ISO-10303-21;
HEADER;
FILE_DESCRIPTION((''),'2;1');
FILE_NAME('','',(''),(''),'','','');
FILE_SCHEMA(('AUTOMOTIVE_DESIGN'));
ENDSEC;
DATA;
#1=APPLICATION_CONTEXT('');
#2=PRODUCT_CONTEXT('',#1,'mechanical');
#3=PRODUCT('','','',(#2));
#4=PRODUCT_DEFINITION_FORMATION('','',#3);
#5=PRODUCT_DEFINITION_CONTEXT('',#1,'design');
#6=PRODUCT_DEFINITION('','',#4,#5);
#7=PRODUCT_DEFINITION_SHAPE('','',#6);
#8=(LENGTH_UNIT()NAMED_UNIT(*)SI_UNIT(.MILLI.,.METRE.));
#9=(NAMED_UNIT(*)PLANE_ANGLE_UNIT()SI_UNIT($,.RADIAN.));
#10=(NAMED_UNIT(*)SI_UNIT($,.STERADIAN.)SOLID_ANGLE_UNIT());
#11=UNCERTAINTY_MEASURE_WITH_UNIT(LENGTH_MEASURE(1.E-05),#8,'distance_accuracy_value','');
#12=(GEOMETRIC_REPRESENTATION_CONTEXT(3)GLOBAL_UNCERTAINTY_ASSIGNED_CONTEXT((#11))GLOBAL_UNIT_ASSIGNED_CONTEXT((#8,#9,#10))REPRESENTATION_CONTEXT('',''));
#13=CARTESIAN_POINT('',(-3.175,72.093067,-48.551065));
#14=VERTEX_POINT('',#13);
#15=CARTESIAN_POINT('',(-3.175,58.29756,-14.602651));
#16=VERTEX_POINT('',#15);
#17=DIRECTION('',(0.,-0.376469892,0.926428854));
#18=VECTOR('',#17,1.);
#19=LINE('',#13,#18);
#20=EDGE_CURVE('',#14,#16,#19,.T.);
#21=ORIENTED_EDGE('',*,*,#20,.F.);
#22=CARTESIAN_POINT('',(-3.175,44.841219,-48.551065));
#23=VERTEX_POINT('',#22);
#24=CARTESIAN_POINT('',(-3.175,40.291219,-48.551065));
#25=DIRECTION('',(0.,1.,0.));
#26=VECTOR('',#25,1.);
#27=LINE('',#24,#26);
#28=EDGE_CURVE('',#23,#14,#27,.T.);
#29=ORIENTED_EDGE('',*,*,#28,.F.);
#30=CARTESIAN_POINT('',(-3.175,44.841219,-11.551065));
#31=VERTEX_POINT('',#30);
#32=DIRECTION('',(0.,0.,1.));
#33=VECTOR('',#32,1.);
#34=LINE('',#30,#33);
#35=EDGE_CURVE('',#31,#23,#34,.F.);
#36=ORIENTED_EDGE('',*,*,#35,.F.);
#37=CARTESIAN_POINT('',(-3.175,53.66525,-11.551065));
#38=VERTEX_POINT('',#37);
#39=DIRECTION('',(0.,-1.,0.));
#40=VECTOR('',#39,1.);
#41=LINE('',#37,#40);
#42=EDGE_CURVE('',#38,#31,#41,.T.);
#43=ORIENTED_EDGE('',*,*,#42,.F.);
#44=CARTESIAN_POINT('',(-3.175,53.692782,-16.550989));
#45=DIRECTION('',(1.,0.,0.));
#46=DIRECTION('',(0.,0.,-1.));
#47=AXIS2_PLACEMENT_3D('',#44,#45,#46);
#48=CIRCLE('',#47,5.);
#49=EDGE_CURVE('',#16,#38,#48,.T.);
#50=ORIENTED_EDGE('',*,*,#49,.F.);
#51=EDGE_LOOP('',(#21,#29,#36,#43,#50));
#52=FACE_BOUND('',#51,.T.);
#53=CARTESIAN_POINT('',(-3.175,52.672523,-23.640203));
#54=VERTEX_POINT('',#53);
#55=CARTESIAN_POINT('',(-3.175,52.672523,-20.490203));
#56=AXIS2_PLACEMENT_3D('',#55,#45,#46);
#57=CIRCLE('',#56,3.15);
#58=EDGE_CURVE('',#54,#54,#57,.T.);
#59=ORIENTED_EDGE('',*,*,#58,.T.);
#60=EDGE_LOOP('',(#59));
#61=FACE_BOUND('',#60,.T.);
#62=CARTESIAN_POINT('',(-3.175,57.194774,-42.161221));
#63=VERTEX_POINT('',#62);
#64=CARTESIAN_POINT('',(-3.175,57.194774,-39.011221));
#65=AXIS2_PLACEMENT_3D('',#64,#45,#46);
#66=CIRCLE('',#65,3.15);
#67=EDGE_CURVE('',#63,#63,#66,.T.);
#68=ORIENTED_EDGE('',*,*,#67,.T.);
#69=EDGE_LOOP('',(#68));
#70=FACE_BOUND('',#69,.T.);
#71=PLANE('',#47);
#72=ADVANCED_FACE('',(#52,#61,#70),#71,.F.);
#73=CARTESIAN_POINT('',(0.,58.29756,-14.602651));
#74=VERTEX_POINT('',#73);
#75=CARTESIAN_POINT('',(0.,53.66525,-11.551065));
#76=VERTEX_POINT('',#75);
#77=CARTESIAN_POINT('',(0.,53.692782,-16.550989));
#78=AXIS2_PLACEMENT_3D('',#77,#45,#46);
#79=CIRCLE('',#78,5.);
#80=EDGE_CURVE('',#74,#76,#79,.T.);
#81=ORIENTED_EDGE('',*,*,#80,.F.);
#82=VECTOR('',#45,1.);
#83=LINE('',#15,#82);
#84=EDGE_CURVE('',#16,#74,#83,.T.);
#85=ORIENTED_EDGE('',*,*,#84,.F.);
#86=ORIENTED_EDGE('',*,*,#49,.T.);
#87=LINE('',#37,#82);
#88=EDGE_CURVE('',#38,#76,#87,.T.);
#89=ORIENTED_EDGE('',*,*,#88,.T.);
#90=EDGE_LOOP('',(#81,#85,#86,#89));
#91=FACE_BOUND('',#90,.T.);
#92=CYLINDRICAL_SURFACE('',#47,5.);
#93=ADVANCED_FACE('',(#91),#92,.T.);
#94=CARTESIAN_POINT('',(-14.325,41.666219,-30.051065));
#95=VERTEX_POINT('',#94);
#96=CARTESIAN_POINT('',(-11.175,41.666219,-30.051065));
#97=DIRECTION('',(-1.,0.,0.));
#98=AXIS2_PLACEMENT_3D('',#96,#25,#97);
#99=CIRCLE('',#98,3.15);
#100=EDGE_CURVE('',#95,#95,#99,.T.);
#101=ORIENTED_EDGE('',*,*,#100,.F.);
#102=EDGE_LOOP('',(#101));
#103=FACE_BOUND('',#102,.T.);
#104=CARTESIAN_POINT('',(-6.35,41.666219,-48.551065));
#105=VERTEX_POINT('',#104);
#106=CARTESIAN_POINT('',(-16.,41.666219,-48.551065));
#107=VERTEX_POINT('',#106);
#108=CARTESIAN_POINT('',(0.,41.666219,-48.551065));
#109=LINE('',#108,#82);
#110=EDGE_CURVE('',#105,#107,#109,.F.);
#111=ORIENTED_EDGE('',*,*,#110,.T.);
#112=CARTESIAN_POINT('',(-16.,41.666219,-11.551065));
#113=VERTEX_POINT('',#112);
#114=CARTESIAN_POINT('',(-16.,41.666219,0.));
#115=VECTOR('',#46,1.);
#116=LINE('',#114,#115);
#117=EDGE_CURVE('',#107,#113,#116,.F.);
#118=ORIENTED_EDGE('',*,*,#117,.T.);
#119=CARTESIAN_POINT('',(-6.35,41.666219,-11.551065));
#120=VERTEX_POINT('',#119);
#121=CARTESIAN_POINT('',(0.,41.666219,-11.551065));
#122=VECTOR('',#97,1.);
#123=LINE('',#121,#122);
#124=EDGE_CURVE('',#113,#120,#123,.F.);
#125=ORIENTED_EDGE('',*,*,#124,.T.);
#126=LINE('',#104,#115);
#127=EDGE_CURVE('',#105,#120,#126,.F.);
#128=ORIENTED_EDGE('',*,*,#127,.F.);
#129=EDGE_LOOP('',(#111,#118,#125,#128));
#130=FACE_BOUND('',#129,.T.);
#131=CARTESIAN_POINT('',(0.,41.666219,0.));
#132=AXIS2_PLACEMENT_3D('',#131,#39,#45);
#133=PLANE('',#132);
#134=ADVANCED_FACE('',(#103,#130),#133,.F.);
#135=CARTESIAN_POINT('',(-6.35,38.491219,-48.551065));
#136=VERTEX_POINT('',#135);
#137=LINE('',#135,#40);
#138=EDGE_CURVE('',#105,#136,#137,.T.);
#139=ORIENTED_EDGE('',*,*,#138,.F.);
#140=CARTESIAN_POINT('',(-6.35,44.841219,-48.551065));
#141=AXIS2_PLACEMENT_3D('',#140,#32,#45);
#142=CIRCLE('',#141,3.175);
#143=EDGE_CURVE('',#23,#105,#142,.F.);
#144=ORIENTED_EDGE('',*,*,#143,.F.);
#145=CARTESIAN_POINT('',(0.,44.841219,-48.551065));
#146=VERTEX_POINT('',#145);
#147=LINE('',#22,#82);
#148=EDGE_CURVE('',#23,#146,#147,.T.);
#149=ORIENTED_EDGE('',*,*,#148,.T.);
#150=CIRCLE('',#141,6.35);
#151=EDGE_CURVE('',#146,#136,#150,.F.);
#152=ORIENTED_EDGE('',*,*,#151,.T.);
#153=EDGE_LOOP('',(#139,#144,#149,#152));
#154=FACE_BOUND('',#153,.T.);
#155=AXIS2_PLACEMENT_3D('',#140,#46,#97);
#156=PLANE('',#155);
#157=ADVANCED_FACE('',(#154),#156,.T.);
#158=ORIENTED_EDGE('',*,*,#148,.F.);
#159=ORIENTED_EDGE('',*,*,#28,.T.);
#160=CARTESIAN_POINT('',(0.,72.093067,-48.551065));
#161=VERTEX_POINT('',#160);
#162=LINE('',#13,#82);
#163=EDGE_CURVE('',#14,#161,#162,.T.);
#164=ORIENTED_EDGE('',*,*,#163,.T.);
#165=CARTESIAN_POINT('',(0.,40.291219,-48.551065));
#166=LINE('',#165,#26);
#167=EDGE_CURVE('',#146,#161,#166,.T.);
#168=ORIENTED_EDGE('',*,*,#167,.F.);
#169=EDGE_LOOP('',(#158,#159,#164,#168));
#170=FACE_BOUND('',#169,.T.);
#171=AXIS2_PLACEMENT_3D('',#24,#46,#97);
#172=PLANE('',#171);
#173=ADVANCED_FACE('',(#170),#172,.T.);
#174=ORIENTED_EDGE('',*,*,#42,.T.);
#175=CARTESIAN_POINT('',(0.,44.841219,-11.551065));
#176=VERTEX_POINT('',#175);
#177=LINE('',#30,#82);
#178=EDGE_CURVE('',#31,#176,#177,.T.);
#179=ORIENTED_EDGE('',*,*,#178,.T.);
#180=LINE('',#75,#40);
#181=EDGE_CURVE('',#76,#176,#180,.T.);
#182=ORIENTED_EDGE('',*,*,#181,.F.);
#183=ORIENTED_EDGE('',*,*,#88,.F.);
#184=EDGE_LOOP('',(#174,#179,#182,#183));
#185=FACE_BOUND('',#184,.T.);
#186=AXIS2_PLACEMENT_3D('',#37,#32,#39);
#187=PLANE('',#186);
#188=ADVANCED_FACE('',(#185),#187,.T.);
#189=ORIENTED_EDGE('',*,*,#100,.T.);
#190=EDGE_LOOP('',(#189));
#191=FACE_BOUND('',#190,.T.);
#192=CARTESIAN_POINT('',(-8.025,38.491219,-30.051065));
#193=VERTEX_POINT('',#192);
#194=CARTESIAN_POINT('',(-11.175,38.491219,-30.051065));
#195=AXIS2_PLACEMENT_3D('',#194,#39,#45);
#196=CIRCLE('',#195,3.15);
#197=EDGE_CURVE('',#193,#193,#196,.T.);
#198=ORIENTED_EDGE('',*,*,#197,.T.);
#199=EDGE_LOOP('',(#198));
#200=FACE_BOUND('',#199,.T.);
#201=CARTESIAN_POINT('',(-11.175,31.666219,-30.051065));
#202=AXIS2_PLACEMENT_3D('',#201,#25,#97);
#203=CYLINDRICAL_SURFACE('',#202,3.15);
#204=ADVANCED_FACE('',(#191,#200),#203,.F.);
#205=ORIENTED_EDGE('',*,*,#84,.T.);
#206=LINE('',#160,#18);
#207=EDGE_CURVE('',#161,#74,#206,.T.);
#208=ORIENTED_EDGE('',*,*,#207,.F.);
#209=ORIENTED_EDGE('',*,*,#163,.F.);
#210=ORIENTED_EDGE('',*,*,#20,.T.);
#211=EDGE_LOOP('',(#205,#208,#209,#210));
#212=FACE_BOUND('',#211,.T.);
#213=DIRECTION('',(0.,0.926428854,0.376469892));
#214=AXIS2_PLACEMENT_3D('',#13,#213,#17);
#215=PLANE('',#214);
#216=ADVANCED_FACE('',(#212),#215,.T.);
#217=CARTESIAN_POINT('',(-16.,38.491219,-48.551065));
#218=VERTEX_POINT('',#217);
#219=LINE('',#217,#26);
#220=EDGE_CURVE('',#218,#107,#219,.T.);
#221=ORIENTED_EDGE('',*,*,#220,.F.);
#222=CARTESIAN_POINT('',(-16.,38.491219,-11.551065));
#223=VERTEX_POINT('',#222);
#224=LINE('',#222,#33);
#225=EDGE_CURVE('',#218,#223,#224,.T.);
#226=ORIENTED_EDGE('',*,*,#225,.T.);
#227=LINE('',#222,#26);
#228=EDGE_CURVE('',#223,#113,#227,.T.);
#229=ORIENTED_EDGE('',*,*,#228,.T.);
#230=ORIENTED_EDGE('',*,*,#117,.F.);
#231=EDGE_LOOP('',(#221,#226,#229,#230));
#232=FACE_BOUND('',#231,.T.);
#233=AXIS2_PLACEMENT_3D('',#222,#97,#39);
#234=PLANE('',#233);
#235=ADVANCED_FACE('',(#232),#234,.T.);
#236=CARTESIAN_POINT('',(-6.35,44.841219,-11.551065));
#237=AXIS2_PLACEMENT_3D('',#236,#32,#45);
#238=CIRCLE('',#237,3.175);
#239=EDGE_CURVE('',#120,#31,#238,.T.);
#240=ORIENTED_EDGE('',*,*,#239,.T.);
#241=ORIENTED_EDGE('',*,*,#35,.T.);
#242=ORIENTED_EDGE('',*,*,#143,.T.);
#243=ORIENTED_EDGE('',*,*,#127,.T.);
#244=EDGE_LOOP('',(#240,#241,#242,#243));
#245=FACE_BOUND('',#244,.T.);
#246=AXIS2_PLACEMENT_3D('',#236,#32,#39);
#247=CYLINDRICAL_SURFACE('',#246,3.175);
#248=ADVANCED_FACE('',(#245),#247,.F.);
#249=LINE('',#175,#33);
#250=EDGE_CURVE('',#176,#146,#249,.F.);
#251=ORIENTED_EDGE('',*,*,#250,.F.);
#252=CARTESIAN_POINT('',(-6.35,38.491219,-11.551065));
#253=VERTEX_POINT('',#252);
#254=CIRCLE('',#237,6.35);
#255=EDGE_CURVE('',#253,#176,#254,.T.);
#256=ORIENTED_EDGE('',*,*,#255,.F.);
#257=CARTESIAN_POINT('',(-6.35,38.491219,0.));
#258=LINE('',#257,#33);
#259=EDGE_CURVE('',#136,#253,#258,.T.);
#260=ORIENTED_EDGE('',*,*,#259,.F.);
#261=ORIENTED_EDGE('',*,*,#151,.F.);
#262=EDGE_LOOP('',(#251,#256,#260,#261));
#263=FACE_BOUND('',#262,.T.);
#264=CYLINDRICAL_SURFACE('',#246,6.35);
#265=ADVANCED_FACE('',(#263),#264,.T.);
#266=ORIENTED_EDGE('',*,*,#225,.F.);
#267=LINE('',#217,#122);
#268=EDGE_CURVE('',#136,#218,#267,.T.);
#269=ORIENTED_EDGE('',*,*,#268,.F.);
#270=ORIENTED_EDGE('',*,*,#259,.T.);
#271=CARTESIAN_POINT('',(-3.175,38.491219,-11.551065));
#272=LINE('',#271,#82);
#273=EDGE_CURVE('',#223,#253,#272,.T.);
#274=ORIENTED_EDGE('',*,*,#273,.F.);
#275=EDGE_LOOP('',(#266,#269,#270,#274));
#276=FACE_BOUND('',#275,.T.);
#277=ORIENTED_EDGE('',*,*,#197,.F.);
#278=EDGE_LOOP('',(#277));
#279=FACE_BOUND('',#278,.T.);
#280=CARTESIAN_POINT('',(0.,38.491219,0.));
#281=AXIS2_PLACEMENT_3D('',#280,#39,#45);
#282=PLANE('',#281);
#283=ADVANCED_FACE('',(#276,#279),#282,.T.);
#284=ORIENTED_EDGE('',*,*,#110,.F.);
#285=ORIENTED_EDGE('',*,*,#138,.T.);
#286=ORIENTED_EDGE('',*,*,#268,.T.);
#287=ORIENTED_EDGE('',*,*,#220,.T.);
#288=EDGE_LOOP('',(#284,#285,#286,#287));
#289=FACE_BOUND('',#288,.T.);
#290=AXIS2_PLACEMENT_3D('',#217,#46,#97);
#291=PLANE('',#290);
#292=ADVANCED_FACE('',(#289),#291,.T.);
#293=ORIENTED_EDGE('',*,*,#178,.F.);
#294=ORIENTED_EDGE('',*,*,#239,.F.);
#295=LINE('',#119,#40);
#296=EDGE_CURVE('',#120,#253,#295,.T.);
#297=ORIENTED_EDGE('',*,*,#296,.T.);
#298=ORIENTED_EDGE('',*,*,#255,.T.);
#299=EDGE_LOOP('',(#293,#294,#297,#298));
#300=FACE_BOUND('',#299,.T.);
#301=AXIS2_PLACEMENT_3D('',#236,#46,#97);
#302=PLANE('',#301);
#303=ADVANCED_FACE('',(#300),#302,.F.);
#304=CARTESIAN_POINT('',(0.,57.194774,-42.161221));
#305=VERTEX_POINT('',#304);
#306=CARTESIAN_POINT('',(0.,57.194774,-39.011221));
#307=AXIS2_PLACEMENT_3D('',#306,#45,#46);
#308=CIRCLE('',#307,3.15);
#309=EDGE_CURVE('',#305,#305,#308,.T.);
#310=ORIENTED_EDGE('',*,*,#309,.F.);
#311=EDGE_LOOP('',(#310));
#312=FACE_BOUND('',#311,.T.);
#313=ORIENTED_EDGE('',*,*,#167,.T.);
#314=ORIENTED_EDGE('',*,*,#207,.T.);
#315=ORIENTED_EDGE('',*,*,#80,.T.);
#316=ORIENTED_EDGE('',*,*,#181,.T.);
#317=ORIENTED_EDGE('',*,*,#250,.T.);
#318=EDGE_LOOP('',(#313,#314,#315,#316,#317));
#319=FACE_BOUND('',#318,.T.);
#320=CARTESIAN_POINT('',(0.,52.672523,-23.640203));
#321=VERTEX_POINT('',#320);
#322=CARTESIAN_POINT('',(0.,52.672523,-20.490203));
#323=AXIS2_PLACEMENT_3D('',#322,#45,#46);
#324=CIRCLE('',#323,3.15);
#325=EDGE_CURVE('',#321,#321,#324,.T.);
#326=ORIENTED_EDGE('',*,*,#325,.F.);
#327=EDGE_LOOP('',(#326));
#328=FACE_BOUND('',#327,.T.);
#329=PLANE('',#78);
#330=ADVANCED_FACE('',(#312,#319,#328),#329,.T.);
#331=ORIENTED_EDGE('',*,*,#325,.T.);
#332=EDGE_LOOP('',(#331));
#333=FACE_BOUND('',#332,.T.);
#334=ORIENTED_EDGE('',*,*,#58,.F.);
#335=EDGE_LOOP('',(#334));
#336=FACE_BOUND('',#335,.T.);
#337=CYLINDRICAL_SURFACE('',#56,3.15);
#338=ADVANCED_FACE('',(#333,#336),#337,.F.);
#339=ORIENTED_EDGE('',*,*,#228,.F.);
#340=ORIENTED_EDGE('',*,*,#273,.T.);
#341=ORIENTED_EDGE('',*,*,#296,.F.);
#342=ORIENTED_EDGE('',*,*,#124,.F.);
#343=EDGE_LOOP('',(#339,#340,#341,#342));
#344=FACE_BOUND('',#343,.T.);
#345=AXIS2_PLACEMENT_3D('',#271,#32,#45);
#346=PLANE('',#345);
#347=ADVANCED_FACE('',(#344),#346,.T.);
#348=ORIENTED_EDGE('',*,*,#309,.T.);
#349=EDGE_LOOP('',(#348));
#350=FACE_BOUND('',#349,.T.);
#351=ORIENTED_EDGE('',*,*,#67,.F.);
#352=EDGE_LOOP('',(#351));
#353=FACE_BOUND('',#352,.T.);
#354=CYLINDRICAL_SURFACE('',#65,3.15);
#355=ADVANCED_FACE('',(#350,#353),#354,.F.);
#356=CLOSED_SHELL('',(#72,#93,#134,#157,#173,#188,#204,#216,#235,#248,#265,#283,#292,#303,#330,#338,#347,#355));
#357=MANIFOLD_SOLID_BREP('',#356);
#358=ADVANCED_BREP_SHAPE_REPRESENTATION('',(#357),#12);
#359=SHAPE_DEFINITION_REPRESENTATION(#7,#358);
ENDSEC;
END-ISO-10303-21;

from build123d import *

# Parameters (mm, degrees)
SKETCH2_R                    = 3.15
BASE_FLANGE1_DEPTH           = 3.175
EDGE_FLANGE1_STRIP_W         = 20.85
EDGE_FLANGE1_STRIP_H         = 3.175
EDGE_FLANGE1_STRIP_CUT_DEPTH = 37
EDGE_FLANGE1_DEPTH           = 37
SKETCH10_R                   = 3.15
CUT_EXTRUDE1_DEPTH           = 10


# Sheet-metal steps are written as plain solids
with BuildPart() as part:
    # Sketch2 → Base-Flange1 (new body)
    with BuildSketch(Plane(origin=(0, 0, 0), x_dir=(0, 0, -1), z_dir=(1, 0, 0))):
        with BuildLine():
            Line((48.551064785, 40.291218586), (48.551064785, 72.093066751))
            Line((48.551064785, 72.093066751), (14.602650648, 58.297559694))
            ThreePointArc((14.602650648, 58.297559694), (12.37556545, 56.443388888), (11.551064785, 53.665249851))
            Line((11.551064785, 53.665249851), (11.551064785, 40.291218586))
            Line((11.551064785, 40.291218586), (48.551064785, 40.291218586))
        make_face()
        with Locations((39.011220588, 57.194773579)):
            Circle(SKETCH2_R, mode=Mode.SUBTRACT)
        with Locations((20.490203266, 52.672523101)):
            Circle(SKETCH2_R, mode=Mode.SUBTRACT)
    extrude(amount=-BASE_FLANGE1_DEPTH)

    # Edge-Flange1 strip (across the edge) → Edge-Flange1 strip cut (cut)
    with BuildSketch(Plane(origin=(-3.175, 38.491218586, -48.551064785), x_dir=(0, 1, 0), z_dir=(0, 0, 1))):
        with Locations((-4.075, -1.5875)):
            Rectangle(EDGE_FLANGE1_STRIP_W, EDGE_FLANGE1_STRIP_H)
    extrude(amount=EDGE_FLANGE1_STRIP_CUT_DEPTH, mode=Mode.SUBTRACT)

    # Edge-Flange1 section (across the edge) → Edge-Flange1 (add)
    with BuildSketch(Plane(origin=(-3.175, 38.491218586, -48.551064785), x_dir=(0, 1, 0), z_dir=(0, 0, 1))):
        with BuildLine():
            Line((0, 3.175), (0, 12.825))
            Line((0, 12.825), (3.175, 12.825))
            Line((3.175, 12.825), (3.175, 3.175))
            ThreePointArc((3.175, 3.175), (4.10493597, 0.92993597), (6.35, 0))
            Line((6.35, 0), (6.35, -3.175))
            ThreePointArc((6.35, -3.175), (1.859871939, -1.315128061), (0, 3.175))
        make_face()
    extrude(amount=EDGE_FLANGE1_DEPTH)

    # Sketch10 → Cut-Extrude1 (cut)
    with BuildSketch(Plane(origin=(0, 41.666218586, 0), x_dir=(1, 0, 0), z_dir=(0, 1, 0))):
        with Locations(Location((-11.175, 30.051064785, 0), (0, 0, 180))):
            Circle(SKETCH10_R)
    extrude(amount=-CUT_EXTRUDE1_DEPTH, mode=Mode.SUBTRACT)


solid = part.part
